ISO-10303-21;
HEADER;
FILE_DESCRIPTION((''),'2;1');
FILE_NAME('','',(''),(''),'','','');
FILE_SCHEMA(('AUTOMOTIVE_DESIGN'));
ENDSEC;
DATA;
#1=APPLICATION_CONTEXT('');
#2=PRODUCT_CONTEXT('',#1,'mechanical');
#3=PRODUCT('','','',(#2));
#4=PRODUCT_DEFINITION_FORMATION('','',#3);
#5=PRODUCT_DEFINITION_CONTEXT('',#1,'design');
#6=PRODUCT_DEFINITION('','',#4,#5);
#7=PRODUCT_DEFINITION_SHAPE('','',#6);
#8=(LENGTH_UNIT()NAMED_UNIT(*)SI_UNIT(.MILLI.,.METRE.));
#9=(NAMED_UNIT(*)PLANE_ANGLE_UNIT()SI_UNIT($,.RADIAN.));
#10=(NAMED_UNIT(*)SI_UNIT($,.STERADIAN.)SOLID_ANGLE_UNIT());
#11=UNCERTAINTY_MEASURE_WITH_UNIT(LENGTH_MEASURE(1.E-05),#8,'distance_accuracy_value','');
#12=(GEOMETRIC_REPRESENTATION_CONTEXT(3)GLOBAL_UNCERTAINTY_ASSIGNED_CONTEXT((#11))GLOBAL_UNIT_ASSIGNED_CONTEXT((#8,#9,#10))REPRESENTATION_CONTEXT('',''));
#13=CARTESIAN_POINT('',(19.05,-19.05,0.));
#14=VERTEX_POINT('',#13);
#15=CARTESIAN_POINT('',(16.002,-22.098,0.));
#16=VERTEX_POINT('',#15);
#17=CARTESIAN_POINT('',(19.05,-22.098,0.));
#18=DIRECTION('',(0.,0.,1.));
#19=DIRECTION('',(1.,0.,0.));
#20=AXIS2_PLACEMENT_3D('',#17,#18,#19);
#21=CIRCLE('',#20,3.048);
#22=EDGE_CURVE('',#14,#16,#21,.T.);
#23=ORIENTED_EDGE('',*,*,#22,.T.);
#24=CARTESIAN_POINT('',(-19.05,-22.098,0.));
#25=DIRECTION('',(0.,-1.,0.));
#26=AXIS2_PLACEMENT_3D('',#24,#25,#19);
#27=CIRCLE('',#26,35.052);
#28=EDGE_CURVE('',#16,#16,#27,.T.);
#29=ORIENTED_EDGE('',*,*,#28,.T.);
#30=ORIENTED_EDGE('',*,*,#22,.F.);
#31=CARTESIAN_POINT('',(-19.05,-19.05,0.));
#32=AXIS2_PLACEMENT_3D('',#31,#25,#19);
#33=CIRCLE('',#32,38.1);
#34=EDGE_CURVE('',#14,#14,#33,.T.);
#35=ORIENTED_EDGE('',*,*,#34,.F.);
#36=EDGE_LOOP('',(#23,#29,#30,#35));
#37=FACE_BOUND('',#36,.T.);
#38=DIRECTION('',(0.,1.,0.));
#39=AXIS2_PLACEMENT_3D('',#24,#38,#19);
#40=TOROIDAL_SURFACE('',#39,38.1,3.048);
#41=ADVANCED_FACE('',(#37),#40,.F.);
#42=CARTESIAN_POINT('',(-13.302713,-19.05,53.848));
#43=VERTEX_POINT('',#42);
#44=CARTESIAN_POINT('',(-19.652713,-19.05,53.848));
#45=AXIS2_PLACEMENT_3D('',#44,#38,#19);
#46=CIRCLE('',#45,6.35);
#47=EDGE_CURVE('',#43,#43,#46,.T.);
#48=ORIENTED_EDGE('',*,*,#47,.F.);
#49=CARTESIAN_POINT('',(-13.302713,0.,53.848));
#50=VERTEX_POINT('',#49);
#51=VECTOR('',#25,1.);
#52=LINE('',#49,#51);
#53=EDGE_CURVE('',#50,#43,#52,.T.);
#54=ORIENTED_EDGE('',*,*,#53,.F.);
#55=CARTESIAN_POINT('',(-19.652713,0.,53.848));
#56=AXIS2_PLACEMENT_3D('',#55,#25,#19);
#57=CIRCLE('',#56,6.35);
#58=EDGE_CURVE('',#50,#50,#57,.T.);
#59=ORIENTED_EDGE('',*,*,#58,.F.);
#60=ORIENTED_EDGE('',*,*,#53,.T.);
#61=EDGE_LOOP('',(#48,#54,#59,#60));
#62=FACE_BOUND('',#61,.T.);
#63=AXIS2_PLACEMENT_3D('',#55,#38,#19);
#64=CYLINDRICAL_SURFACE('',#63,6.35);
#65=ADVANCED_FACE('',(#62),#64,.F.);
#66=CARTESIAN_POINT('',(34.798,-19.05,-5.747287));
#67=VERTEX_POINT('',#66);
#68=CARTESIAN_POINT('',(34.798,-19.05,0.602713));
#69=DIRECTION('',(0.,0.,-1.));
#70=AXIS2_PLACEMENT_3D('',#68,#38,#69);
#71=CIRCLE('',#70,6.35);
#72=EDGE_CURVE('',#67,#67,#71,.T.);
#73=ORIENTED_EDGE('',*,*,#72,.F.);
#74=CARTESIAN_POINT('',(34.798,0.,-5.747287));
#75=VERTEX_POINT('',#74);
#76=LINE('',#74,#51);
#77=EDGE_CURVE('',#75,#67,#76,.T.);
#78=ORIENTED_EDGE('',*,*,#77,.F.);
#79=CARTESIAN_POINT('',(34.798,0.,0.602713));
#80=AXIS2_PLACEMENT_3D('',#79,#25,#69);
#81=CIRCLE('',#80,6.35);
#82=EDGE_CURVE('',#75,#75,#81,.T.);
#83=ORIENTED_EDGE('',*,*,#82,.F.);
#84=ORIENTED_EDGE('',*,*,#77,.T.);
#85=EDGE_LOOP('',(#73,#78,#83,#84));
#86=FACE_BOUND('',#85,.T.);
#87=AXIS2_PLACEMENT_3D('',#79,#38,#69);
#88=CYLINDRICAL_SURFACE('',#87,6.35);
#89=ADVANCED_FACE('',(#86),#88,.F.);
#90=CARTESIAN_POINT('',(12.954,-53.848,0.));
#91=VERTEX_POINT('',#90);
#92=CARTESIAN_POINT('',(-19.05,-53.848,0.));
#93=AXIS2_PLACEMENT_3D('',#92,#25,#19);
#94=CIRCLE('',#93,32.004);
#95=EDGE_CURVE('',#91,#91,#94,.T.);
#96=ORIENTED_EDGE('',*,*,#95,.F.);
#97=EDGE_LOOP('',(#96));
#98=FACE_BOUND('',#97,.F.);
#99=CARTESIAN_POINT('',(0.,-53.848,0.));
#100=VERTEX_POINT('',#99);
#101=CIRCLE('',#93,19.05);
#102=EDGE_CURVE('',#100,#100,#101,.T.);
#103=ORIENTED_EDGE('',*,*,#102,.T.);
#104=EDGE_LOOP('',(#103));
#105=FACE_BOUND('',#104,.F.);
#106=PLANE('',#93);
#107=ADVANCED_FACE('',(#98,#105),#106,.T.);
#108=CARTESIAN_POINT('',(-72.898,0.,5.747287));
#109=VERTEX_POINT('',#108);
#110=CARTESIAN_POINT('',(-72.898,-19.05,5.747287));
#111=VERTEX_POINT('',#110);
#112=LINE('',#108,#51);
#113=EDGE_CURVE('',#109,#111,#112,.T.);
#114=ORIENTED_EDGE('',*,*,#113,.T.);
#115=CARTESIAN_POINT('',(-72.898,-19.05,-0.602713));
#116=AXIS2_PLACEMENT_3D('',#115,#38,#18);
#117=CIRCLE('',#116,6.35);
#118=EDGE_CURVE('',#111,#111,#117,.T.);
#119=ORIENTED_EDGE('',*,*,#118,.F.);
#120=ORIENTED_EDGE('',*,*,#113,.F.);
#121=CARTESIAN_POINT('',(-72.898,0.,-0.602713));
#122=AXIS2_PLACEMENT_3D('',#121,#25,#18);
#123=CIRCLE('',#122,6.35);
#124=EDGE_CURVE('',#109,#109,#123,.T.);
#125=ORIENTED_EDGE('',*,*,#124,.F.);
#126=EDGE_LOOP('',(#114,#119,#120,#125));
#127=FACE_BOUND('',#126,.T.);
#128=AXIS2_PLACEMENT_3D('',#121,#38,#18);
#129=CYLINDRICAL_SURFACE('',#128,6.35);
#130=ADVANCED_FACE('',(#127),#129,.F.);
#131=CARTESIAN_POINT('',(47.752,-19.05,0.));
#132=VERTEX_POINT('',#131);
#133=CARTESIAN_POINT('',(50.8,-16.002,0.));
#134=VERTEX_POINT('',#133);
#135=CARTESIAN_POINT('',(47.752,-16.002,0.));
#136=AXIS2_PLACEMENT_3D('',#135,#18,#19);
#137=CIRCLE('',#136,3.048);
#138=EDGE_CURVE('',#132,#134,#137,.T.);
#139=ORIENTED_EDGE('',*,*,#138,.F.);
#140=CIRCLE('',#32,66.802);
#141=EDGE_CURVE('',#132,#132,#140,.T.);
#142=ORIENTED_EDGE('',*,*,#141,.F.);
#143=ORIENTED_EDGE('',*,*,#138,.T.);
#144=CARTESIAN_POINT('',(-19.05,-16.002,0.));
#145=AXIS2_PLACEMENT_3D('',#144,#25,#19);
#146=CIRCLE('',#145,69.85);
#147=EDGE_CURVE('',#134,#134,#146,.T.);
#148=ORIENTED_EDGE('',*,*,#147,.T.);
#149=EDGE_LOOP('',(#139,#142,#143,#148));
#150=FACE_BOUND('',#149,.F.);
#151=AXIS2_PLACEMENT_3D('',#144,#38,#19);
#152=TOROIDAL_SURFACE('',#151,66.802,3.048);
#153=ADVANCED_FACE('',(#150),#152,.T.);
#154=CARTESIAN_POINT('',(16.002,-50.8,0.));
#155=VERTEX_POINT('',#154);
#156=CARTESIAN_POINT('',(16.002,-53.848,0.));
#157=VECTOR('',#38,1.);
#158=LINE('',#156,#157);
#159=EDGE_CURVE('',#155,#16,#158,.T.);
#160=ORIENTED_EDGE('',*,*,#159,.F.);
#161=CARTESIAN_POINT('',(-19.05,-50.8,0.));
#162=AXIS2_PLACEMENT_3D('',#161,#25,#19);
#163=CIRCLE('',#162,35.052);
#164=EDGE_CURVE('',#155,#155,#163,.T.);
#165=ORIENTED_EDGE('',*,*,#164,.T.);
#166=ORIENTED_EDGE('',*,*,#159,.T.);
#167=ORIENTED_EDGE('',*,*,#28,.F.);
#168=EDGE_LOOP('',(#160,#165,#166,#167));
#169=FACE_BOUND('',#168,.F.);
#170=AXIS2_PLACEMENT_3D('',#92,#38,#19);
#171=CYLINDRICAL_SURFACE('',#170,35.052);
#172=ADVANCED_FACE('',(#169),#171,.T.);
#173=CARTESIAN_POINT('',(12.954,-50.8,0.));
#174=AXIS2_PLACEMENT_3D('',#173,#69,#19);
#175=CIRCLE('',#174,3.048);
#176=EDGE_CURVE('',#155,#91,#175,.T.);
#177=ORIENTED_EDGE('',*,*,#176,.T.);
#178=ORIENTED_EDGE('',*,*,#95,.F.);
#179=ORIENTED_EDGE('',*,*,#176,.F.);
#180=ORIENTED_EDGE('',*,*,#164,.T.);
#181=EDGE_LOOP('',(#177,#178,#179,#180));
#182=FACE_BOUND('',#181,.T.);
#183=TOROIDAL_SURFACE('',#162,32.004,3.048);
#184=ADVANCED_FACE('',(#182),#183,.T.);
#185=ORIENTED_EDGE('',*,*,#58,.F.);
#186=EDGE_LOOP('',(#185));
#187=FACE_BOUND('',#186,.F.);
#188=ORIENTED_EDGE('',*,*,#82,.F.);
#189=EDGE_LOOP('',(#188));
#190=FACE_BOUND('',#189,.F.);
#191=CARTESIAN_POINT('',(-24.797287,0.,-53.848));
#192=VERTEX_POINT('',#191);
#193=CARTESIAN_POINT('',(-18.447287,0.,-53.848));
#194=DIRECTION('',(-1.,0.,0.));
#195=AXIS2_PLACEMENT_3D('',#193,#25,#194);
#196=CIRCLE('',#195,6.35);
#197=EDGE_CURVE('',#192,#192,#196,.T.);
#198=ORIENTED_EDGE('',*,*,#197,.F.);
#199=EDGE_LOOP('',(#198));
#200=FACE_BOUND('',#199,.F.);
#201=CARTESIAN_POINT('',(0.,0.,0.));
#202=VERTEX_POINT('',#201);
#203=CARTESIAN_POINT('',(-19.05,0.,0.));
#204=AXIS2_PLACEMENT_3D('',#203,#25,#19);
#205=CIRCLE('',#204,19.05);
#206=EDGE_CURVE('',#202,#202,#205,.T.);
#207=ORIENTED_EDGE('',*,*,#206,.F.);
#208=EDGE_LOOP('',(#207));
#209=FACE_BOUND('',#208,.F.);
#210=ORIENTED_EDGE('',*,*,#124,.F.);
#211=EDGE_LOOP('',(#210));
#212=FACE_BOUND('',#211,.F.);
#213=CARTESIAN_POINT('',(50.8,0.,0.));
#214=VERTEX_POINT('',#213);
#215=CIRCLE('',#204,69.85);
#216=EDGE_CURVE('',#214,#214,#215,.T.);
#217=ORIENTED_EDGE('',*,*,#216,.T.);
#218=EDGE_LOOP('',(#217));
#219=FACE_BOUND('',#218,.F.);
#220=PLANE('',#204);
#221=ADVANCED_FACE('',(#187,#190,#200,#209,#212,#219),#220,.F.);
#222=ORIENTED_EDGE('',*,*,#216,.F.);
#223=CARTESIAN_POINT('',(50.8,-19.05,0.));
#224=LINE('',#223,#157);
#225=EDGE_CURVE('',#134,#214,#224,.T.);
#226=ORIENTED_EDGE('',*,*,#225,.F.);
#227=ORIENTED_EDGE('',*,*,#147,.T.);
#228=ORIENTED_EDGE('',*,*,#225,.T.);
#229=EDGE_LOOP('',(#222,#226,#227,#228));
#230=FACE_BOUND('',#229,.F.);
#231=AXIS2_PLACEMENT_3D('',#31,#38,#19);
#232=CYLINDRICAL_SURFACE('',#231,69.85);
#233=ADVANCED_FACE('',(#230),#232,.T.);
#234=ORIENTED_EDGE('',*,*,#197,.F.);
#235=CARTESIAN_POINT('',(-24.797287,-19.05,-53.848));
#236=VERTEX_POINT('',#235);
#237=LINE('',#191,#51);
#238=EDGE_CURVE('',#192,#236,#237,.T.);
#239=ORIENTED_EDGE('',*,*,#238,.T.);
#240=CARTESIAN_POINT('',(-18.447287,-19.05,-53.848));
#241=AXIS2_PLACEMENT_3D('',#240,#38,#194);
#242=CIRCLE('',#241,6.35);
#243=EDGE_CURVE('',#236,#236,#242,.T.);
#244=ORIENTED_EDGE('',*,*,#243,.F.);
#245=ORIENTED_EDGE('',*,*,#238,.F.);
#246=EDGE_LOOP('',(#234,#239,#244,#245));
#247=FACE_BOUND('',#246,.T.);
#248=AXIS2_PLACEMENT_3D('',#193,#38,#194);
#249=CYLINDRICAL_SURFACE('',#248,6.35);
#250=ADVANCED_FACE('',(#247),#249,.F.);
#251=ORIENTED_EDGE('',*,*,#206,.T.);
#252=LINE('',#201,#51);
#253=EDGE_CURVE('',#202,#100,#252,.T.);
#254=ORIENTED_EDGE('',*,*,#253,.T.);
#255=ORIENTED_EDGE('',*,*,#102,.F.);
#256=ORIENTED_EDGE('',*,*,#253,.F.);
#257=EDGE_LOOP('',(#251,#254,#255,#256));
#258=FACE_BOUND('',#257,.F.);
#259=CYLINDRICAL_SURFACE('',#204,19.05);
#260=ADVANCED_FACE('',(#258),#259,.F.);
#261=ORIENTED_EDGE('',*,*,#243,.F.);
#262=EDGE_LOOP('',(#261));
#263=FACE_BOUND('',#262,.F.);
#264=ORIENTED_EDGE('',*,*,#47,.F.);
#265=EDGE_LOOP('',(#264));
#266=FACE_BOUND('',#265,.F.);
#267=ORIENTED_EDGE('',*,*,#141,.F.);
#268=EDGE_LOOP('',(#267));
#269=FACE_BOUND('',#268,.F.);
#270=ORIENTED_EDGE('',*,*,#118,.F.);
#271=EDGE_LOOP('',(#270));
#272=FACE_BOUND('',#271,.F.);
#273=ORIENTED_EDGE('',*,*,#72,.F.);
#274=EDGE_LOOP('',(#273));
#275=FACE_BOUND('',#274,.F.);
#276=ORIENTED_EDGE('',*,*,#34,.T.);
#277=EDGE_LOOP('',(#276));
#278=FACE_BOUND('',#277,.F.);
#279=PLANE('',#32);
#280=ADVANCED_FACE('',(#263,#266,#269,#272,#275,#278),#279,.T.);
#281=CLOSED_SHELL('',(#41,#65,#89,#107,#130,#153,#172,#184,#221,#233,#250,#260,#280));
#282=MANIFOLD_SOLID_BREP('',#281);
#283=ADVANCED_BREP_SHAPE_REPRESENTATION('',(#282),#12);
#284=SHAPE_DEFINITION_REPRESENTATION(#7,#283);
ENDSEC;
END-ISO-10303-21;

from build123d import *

# Parameters (mm, degrees)
F3_R            = 3.048
F4_R            = 3.048
F5_R            = 3.048
F2_R            = 6.35
F6_DEPTH        = 25.4
F6_COPIES_COUNT = 4


# Not quite as in the source:
# - a pattern or mirror of a feature is missing from the dataset's text; its kind, count and spacing are read off the source's solid


with BuildPart() as f1:
    # F0 (on Top) → F1 (revolve)
    with BuildSketch(Plane.XY):
        Polygon((50.8, 0), (0, 0), (0, -53.848), (16.002, -53.848), (16.002, -19.05), (50.8, -19.05), align=None)
    revolve(axis=Axis((-19.05, -27.112416923, 0), (0, -1, 0)))

    # F3
    f3_edges = [f1.edges().sort_by_distance(p)[0] for p in [
        (-88.9, -19.05, 0),
    ]]
    fillet(f3_edges, radius=F3_R)

    # F4
    f4_edges = [f1.edges().sort_by_distance(p)[0] for p in [
        (-54.102, -19.05, 0),
    ]]
    fillet(f4_edges, radius=F4_R)

    # F5
    f5_edges = [f1.edges().sort_by_distance(p)[0] for p in [
        (-54.102, -53.848, 0),
    ]]
    fillet(f5_edges, radius=F5_R)

    # F2 (on Front) → F6 (cut)
    with BuildSketch(Plane.XZ):
        with Locations((-19.6527130902, 53.848)):
            Circle(F2_R)
    f6 = extrude(amount=F6_DEPTH, mode=Mode.SUBTRACT)

    # F6_copies: F6 ×4 about axis
    f6_copies_axis = Axis((-19.05, 0, 0), (0, 1, 0))
    for i in range(1, F6_COPIES_COUNT):
        add(f6.rotate(f6_copies_axis, i * 360 / F6_COPIES_COUNT), mode=Mode.SUBTRACT)


solid = f1.part
